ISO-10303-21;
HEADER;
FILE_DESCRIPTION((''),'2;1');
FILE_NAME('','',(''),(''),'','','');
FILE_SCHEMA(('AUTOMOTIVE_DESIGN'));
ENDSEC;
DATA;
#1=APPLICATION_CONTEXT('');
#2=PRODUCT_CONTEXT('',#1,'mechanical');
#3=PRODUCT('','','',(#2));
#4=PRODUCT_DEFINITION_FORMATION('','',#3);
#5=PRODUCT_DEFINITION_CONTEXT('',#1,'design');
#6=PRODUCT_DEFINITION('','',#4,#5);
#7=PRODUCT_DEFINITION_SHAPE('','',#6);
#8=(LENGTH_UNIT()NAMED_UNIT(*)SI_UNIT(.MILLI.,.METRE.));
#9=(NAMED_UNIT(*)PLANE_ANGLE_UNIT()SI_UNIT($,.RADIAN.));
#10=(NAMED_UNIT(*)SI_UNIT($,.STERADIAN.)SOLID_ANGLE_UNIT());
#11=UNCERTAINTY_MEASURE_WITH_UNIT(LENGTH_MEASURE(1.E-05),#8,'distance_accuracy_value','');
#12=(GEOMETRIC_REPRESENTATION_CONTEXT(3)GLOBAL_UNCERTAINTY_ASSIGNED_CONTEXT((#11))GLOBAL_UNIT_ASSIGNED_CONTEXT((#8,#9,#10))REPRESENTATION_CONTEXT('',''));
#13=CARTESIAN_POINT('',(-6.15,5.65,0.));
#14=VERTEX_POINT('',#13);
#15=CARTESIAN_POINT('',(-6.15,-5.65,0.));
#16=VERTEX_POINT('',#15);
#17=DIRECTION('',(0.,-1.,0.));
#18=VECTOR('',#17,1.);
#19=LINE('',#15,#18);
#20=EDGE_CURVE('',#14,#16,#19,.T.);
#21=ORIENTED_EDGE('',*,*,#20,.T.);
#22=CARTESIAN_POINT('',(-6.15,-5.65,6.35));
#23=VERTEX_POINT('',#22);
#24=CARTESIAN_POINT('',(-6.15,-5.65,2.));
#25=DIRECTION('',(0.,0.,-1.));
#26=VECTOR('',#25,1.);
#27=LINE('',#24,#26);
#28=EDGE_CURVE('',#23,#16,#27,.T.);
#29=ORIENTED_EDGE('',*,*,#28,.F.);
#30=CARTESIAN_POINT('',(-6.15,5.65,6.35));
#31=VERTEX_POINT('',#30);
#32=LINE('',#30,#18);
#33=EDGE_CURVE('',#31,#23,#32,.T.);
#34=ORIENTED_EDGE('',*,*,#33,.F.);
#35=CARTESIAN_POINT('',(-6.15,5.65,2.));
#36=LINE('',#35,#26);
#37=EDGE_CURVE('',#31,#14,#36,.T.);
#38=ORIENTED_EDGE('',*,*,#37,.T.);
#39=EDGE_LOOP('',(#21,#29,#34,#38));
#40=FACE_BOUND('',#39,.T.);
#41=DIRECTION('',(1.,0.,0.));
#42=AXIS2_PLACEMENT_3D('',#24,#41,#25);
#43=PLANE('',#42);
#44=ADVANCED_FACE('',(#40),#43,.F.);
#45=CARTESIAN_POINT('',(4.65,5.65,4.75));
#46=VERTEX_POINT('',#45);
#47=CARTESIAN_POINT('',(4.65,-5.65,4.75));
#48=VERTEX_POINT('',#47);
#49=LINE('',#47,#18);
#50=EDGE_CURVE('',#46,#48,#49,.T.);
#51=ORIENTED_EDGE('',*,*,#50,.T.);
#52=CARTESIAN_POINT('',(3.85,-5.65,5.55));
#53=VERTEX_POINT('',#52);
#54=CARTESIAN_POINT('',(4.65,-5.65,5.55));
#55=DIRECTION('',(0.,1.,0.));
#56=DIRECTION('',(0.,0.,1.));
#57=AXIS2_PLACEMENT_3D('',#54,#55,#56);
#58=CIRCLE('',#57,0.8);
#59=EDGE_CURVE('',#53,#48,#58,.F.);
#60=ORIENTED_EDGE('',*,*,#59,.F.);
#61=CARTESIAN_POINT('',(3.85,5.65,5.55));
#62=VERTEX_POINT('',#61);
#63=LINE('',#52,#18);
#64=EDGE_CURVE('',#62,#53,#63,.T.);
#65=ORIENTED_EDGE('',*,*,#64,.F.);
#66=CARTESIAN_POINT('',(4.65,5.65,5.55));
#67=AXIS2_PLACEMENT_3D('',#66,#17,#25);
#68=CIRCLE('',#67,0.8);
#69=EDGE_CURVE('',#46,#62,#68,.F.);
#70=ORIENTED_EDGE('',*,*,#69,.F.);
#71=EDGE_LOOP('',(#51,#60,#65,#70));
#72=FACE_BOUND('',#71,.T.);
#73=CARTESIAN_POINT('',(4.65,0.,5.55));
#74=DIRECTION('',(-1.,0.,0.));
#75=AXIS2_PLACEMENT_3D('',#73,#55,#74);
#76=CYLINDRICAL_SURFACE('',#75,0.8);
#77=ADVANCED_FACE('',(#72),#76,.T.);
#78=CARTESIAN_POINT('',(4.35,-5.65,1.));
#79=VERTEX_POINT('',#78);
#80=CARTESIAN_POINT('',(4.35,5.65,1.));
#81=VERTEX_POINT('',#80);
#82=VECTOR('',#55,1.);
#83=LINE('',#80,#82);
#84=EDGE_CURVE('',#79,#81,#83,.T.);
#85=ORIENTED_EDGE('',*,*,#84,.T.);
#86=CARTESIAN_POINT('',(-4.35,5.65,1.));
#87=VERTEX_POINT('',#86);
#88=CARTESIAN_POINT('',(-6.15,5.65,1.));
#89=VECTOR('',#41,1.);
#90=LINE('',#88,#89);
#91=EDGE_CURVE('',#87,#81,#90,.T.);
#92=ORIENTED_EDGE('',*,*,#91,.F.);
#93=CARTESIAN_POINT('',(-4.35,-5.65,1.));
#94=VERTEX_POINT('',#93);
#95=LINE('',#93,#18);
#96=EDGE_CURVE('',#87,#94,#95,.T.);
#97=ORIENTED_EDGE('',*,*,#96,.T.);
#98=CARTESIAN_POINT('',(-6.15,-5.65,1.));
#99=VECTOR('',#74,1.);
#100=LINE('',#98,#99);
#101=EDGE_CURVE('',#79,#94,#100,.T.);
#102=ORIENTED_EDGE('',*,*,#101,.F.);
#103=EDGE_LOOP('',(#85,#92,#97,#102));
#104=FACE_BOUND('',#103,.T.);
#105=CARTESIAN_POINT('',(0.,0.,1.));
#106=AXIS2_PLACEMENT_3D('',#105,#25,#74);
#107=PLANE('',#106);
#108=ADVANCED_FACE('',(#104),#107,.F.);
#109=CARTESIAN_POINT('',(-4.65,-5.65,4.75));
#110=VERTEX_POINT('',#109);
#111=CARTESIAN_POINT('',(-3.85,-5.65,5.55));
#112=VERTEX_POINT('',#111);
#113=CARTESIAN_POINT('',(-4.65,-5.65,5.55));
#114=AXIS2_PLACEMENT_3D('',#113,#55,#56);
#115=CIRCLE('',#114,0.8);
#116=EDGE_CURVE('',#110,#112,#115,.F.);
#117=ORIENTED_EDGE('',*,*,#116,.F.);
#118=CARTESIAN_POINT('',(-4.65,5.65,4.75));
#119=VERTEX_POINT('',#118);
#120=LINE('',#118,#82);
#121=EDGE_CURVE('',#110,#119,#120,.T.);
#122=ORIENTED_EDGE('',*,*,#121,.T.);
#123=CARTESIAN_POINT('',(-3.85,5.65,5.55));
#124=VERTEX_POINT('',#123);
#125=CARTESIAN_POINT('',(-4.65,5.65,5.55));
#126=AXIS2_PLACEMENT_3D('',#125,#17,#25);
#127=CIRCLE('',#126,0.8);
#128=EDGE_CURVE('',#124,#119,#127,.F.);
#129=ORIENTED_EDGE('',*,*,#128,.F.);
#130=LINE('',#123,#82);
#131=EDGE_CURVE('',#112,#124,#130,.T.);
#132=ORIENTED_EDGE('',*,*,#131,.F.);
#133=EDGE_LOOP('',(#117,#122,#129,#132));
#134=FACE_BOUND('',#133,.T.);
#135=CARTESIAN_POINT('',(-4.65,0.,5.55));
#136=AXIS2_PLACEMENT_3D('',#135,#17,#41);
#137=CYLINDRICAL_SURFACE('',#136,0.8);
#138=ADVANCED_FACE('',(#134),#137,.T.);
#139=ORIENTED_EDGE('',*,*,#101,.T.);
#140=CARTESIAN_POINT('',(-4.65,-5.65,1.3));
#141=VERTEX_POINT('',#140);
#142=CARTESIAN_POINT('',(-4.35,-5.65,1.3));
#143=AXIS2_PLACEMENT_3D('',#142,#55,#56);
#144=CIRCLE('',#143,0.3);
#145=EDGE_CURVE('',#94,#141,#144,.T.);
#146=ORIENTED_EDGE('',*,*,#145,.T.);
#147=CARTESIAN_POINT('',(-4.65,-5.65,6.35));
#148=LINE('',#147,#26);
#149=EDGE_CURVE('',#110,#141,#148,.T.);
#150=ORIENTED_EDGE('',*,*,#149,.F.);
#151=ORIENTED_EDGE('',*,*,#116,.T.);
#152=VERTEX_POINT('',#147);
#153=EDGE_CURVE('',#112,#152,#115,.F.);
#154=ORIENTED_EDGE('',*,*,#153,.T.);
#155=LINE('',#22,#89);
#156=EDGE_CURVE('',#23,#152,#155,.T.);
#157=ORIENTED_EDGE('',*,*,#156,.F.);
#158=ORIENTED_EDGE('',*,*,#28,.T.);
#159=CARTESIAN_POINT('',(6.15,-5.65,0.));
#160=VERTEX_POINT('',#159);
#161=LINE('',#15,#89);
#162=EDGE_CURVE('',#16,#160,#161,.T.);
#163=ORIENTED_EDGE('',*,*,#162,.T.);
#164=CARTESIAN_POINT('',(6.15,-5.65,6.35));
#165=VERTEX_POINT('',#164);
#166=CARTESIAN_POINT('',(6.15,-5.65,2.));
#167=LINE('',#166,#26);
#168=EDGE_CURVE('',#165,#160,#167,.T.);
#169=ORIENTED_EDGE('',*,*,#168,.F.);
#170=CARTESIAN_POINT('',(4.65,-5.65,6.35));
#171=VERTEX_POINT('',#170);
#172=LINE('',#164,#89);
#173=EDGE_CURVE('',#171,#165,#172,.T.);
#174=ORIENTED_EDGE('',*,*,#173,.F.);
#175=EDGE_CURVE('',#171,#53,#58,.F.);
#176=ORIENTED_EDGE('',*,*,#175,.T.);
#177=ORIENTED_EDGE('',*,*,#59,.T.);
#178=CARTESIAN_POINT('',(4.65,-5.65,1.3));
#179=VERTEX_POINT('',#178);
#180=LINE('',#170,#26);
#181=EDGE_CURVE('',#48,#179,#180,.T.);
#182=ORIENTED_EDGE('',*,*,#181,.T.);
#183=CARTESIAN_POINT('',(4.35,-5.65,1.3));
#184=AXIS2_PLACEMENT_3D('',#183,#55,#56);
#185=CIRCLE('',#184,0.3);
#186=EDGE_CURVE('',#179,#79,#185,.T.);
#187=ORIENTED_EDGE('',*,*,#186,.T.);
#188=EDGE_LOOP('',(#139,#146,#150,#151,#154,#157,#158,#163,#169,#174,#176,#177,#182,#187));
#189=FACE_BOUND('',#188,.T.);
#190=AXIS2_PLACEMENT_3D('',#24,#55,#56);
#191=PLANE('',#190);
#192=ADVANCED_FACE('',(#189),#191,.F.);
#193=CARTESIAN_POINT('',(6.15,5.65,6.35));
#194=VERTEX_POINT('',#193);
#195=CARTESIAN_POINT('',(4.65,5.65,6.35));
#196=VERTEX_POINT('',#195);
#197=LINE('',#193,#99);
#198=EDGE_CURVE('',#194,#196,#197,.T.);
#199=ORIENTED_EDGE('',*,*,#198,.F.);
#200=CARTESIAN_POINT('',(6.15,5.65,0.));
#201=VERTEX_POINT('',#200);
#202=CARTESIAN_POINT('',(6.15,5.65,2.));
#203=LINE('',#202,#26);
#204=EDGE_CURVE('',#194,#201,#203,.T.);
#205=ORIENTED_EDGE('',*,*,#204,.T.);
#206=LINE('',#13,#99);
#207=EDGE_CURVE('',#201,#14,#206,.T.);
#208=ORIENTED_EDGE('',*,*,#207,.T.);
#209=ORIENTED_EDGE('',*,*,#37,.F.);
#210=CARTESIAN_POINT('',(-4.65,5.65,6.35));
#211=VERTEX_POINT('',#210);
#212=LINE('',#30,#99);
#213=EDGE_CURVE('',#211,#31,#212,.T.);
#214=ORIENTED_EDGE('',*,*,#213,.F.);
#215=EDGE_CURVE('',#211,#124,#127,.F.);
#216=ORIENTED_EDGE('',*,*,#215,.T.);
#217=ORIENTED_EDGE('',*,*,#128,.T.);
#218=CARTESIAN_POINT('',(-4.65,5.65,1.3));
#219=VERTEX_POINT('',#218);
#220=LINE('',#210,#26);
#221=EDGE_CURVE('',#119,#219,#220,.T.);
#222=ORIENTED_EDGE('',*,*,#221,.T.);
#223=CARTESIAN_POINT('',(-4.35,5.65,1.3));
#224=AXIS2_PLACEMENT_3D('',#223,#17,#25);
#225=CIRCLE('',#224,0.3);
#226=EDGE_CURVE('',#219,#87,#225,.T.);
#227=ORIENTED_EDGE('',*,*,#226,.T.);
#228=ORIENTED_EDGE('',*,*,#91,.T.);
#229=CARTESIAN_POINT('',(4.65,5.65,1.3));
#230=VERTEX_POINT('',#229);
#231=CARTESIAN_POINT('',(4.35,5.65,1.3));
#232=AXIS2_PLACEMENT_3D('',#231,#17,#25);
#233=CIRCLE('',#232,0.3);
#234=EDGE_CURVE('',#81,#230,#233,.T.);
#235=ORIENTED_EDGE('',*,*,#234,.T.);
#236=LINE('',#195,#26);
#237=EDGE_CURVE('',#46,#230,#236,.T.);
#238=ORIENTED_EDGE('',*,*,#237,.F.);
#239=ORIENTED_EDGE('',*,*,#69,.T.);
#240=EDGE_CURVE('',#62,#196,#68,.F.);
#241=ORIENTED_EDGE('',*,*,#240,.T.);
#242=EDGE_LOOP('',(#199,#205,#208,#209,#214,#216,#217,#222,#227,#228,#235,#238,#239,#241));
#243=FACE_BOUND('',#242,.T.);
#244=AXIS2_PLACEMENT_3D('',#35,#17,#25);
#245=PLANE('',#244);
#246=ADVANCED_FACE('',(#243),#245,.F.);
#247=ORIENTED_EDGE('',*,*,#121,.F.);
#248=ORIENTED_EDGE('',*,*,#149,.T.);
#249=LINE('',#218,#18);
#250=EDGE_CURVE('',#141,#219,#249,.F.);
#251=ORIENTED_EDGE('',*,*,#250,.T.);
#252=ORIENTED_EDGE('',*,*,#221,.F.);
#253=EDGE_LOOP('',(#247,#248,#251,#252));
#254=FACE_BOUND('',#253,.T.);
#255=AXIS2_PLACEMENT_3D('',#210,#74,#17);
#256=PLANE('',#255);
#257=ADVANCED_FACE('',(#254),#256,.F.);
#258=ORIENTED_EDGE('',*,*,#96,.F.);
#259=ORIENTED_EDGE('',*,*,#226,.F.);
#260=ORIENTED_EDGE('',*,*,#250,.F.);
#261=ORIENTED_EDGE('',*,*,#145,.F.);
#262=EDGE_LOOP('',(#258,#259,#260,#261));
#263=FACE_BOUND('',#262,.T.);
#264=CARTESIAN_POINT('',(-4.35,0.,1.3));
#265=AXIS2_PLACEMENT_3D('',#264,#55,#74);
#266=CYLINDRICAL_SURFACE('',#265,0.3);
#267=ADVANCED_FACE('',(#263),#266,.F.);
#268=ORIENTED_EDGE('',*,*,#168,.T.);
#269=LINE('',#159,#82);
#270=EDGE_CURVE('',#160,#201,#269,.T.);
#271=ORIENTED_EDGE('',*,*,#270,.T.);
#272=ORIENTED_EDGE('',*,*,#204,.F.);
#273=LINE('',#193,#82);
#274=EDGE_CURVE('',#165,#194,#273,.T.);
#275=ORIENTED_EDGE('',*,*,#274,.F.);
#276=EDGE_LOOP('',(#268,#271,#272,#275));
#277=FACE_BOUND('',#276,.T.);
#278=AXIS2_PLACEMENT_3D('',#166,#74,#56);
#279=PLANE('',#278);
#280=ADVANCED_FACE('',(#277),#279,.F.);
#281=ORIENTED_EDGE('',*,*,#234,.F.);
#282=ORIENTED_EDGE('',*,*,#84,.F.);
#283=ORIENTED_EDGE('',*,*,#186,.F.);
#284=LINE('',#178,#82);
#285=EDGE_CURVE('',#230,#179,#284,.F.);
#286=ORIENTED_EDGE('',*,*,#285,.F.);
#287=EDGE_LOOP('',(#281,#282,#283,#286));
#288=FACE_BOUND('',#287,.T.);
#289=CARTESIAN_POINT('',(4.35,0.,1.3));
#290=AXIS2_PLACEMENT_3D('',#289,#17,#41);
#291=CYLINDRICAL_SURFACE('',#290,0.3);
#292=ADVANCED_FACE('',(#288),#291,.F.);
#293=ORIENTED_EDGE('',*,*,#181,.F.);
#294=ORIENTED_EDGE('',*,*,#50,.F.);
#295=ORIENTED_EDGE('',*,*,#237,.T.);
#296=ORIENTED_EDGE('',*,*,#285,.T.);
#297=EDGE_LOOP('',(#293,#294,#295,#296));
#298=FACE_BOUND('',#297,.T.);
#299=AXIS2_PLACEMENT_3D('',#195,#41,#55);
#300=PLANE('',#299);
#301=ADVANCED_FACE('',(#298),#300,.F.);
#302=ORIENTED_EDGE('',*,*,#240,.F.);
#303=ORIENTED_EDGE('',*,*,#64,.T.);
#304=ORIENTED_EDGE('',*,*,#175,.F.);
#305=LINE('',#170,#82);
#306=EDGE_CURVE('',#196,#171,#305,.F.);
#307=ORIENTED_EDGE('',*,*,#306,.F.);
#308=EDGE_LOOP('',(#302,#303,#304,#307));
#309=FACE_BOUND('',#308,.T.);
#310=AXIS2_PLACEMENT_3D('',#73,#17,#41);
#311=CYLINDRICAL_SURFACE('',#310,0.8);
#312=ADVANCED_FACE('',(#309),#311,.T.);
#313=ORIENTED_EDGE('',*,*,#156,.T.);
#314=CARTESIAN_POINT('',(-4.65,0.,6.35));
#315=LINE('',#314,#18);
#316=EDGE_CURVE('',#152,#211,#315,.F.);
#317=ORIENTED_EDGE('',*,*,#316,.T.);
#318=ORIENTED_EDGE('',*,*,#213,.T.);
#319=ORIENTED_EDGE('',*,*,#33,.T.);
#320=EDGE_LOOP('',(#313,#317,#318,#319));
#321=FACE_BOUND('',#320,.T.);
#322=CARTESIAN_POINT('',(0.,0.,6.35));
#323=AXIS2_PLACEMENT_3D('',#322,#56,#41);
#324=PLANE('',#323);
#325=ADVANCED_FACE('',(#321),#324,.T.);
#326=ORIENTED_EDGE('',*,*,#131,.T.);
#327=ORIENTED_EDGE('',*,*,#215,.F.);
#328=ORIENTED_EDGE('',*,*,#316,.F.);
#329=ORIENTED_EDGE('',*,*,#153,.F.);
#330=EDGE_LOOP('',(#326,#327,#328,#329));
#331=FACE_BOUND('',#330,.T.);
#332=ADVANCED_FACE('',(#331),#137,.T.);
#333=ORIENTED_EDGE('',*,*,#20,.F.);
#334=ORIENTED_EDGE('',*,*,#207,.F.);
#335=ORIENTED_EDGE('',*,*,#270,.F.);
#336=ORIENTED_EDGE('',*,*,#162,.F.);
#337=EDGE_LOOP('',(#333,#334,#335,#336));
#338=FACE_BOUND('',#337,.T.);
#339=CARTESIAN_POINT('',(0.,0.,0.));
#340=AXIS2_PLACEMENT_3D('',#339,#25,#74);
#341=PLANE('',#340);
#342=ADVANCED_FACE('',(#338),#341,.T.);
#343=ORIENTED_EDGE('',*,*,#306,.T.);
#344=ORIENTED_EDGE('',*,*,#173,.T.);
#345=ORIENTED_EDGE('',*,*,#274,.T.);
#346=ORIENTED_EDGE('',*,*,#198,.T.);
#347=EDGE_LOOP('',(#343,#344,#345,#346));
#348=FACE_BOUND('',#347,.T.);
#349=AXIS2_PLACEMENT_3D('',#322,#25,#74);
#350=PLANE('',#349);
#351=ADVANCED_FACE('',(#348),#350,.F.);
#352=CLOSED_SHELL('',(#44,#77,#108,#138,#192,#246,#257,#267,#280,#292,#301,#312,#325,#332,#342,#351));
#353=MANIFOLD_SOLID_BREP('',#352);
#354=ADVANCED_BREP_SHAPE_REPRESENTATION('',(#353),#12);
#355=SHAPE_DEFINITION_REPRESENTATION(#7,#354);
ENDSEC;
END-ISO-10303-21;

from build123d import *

# Parameters (mm, degrees)
SKETCH_1_W          = 12.3
SKETCH_1_H          = 11.3
EXTRUDE_1_DEPTH     = 2
SKETCH_2_W          = 1.5
SKETCH_2_H          = 11.3
EXTRUDE_2_DEPTH     = 4.35
SKETCH_5_W          = 9.3
SKETCH_5_H          = 11.5
CUT_EXTRUDE_1_DEPTH = 1
SKETCH_8_W          = 1.6
SKETCH_8_H          = 11.3
EXTRUDE_5_DEPTH     = 0.8
SKETCH_9_W          = 1.6
SKETCH_9_H          = 11.3
EXTRUDE_6_DEPTH     = 0.8
FILLET_7_R          = 0.8
FILLET_8_R          = 0.3


with BuildPart() as part:
    # 스케치1 → 보스-돌출1 (new body)
    with BuildSketch(Plane.XY):
        Rectangle(SKETCH_1_W, SKETCH_1_H)
    extrude(amount=EXTRUDE_1_DEPTH)

    # 스케치2 → 보스-돌출2 (add)
    with BuildSketch(Plane.XY.offset(2)):
        with Locations((-5.4, 0)):
            Rectangle(SKETCH_2_W, SKETCH_2_H)
        with Locations((5.4, 0)):
            Rectangle(SKETCH_2_W, SKETCH_2_H)
    extrude(amount=EXTRUDE_2_DEPTH)

    # 스케치5 → 컷-돌출1 (cut)
    with BuildSketch(Plane.XY.offset(2)):
        Rectangle(SKETCH_5_W, SKETCH_5_H)
    extrude(amount=-CUT_EXTRUDE_1_DEPTH, mode=Mode.SUBTRACT)

    # 스케치8 → 보스-돌출5 (add)
    with BuildSketch(Plane(origin=(-4.65, 0, 0), x_dir=(0, 0, -1), z_dir=(1, 0, 0))):
        with Locations((-5.55, 0)):
            Rectangle(SKETCH_8_W, SKETCH_8_H)
    extrude(amount=EXTRUDE_5_DEPTH)

    # 스케치9 → 보스-돌출6 (add)
    with BuildSketch(Plane.ZY.offset(-4.65)):
        with Locations((5.55, 0)):
            Rectangle(SKETCH_9_W, SKETCH_9_H)
    extrude(amount=EXTRUDE_6_DEPTH)

    # 필렛7
    fillet_7_edges = [part.edges().sort_by_distance(p)[0] for p in [
        (3.85, 0, 6.35),
        (-3.85, 0, 6.35),
        (3.85, 0, 4.75),
        (-3.85, 0, 4.75),
    ]]
    fillet(fillet_7_edges, radius=FILLET_7_R - 0.0001)  # a hair under: the kernel refuses the full size

    # 필렛8
    fillet_8_edges = [part.edges().sort_by_distance(p)[0] for p in [
        (4.65, 0, 1),
        (-4.65, 0, 1),
    ]]
    fillet(fillet_8_edges, radius=FILLET_8_R)


solid = part.part
